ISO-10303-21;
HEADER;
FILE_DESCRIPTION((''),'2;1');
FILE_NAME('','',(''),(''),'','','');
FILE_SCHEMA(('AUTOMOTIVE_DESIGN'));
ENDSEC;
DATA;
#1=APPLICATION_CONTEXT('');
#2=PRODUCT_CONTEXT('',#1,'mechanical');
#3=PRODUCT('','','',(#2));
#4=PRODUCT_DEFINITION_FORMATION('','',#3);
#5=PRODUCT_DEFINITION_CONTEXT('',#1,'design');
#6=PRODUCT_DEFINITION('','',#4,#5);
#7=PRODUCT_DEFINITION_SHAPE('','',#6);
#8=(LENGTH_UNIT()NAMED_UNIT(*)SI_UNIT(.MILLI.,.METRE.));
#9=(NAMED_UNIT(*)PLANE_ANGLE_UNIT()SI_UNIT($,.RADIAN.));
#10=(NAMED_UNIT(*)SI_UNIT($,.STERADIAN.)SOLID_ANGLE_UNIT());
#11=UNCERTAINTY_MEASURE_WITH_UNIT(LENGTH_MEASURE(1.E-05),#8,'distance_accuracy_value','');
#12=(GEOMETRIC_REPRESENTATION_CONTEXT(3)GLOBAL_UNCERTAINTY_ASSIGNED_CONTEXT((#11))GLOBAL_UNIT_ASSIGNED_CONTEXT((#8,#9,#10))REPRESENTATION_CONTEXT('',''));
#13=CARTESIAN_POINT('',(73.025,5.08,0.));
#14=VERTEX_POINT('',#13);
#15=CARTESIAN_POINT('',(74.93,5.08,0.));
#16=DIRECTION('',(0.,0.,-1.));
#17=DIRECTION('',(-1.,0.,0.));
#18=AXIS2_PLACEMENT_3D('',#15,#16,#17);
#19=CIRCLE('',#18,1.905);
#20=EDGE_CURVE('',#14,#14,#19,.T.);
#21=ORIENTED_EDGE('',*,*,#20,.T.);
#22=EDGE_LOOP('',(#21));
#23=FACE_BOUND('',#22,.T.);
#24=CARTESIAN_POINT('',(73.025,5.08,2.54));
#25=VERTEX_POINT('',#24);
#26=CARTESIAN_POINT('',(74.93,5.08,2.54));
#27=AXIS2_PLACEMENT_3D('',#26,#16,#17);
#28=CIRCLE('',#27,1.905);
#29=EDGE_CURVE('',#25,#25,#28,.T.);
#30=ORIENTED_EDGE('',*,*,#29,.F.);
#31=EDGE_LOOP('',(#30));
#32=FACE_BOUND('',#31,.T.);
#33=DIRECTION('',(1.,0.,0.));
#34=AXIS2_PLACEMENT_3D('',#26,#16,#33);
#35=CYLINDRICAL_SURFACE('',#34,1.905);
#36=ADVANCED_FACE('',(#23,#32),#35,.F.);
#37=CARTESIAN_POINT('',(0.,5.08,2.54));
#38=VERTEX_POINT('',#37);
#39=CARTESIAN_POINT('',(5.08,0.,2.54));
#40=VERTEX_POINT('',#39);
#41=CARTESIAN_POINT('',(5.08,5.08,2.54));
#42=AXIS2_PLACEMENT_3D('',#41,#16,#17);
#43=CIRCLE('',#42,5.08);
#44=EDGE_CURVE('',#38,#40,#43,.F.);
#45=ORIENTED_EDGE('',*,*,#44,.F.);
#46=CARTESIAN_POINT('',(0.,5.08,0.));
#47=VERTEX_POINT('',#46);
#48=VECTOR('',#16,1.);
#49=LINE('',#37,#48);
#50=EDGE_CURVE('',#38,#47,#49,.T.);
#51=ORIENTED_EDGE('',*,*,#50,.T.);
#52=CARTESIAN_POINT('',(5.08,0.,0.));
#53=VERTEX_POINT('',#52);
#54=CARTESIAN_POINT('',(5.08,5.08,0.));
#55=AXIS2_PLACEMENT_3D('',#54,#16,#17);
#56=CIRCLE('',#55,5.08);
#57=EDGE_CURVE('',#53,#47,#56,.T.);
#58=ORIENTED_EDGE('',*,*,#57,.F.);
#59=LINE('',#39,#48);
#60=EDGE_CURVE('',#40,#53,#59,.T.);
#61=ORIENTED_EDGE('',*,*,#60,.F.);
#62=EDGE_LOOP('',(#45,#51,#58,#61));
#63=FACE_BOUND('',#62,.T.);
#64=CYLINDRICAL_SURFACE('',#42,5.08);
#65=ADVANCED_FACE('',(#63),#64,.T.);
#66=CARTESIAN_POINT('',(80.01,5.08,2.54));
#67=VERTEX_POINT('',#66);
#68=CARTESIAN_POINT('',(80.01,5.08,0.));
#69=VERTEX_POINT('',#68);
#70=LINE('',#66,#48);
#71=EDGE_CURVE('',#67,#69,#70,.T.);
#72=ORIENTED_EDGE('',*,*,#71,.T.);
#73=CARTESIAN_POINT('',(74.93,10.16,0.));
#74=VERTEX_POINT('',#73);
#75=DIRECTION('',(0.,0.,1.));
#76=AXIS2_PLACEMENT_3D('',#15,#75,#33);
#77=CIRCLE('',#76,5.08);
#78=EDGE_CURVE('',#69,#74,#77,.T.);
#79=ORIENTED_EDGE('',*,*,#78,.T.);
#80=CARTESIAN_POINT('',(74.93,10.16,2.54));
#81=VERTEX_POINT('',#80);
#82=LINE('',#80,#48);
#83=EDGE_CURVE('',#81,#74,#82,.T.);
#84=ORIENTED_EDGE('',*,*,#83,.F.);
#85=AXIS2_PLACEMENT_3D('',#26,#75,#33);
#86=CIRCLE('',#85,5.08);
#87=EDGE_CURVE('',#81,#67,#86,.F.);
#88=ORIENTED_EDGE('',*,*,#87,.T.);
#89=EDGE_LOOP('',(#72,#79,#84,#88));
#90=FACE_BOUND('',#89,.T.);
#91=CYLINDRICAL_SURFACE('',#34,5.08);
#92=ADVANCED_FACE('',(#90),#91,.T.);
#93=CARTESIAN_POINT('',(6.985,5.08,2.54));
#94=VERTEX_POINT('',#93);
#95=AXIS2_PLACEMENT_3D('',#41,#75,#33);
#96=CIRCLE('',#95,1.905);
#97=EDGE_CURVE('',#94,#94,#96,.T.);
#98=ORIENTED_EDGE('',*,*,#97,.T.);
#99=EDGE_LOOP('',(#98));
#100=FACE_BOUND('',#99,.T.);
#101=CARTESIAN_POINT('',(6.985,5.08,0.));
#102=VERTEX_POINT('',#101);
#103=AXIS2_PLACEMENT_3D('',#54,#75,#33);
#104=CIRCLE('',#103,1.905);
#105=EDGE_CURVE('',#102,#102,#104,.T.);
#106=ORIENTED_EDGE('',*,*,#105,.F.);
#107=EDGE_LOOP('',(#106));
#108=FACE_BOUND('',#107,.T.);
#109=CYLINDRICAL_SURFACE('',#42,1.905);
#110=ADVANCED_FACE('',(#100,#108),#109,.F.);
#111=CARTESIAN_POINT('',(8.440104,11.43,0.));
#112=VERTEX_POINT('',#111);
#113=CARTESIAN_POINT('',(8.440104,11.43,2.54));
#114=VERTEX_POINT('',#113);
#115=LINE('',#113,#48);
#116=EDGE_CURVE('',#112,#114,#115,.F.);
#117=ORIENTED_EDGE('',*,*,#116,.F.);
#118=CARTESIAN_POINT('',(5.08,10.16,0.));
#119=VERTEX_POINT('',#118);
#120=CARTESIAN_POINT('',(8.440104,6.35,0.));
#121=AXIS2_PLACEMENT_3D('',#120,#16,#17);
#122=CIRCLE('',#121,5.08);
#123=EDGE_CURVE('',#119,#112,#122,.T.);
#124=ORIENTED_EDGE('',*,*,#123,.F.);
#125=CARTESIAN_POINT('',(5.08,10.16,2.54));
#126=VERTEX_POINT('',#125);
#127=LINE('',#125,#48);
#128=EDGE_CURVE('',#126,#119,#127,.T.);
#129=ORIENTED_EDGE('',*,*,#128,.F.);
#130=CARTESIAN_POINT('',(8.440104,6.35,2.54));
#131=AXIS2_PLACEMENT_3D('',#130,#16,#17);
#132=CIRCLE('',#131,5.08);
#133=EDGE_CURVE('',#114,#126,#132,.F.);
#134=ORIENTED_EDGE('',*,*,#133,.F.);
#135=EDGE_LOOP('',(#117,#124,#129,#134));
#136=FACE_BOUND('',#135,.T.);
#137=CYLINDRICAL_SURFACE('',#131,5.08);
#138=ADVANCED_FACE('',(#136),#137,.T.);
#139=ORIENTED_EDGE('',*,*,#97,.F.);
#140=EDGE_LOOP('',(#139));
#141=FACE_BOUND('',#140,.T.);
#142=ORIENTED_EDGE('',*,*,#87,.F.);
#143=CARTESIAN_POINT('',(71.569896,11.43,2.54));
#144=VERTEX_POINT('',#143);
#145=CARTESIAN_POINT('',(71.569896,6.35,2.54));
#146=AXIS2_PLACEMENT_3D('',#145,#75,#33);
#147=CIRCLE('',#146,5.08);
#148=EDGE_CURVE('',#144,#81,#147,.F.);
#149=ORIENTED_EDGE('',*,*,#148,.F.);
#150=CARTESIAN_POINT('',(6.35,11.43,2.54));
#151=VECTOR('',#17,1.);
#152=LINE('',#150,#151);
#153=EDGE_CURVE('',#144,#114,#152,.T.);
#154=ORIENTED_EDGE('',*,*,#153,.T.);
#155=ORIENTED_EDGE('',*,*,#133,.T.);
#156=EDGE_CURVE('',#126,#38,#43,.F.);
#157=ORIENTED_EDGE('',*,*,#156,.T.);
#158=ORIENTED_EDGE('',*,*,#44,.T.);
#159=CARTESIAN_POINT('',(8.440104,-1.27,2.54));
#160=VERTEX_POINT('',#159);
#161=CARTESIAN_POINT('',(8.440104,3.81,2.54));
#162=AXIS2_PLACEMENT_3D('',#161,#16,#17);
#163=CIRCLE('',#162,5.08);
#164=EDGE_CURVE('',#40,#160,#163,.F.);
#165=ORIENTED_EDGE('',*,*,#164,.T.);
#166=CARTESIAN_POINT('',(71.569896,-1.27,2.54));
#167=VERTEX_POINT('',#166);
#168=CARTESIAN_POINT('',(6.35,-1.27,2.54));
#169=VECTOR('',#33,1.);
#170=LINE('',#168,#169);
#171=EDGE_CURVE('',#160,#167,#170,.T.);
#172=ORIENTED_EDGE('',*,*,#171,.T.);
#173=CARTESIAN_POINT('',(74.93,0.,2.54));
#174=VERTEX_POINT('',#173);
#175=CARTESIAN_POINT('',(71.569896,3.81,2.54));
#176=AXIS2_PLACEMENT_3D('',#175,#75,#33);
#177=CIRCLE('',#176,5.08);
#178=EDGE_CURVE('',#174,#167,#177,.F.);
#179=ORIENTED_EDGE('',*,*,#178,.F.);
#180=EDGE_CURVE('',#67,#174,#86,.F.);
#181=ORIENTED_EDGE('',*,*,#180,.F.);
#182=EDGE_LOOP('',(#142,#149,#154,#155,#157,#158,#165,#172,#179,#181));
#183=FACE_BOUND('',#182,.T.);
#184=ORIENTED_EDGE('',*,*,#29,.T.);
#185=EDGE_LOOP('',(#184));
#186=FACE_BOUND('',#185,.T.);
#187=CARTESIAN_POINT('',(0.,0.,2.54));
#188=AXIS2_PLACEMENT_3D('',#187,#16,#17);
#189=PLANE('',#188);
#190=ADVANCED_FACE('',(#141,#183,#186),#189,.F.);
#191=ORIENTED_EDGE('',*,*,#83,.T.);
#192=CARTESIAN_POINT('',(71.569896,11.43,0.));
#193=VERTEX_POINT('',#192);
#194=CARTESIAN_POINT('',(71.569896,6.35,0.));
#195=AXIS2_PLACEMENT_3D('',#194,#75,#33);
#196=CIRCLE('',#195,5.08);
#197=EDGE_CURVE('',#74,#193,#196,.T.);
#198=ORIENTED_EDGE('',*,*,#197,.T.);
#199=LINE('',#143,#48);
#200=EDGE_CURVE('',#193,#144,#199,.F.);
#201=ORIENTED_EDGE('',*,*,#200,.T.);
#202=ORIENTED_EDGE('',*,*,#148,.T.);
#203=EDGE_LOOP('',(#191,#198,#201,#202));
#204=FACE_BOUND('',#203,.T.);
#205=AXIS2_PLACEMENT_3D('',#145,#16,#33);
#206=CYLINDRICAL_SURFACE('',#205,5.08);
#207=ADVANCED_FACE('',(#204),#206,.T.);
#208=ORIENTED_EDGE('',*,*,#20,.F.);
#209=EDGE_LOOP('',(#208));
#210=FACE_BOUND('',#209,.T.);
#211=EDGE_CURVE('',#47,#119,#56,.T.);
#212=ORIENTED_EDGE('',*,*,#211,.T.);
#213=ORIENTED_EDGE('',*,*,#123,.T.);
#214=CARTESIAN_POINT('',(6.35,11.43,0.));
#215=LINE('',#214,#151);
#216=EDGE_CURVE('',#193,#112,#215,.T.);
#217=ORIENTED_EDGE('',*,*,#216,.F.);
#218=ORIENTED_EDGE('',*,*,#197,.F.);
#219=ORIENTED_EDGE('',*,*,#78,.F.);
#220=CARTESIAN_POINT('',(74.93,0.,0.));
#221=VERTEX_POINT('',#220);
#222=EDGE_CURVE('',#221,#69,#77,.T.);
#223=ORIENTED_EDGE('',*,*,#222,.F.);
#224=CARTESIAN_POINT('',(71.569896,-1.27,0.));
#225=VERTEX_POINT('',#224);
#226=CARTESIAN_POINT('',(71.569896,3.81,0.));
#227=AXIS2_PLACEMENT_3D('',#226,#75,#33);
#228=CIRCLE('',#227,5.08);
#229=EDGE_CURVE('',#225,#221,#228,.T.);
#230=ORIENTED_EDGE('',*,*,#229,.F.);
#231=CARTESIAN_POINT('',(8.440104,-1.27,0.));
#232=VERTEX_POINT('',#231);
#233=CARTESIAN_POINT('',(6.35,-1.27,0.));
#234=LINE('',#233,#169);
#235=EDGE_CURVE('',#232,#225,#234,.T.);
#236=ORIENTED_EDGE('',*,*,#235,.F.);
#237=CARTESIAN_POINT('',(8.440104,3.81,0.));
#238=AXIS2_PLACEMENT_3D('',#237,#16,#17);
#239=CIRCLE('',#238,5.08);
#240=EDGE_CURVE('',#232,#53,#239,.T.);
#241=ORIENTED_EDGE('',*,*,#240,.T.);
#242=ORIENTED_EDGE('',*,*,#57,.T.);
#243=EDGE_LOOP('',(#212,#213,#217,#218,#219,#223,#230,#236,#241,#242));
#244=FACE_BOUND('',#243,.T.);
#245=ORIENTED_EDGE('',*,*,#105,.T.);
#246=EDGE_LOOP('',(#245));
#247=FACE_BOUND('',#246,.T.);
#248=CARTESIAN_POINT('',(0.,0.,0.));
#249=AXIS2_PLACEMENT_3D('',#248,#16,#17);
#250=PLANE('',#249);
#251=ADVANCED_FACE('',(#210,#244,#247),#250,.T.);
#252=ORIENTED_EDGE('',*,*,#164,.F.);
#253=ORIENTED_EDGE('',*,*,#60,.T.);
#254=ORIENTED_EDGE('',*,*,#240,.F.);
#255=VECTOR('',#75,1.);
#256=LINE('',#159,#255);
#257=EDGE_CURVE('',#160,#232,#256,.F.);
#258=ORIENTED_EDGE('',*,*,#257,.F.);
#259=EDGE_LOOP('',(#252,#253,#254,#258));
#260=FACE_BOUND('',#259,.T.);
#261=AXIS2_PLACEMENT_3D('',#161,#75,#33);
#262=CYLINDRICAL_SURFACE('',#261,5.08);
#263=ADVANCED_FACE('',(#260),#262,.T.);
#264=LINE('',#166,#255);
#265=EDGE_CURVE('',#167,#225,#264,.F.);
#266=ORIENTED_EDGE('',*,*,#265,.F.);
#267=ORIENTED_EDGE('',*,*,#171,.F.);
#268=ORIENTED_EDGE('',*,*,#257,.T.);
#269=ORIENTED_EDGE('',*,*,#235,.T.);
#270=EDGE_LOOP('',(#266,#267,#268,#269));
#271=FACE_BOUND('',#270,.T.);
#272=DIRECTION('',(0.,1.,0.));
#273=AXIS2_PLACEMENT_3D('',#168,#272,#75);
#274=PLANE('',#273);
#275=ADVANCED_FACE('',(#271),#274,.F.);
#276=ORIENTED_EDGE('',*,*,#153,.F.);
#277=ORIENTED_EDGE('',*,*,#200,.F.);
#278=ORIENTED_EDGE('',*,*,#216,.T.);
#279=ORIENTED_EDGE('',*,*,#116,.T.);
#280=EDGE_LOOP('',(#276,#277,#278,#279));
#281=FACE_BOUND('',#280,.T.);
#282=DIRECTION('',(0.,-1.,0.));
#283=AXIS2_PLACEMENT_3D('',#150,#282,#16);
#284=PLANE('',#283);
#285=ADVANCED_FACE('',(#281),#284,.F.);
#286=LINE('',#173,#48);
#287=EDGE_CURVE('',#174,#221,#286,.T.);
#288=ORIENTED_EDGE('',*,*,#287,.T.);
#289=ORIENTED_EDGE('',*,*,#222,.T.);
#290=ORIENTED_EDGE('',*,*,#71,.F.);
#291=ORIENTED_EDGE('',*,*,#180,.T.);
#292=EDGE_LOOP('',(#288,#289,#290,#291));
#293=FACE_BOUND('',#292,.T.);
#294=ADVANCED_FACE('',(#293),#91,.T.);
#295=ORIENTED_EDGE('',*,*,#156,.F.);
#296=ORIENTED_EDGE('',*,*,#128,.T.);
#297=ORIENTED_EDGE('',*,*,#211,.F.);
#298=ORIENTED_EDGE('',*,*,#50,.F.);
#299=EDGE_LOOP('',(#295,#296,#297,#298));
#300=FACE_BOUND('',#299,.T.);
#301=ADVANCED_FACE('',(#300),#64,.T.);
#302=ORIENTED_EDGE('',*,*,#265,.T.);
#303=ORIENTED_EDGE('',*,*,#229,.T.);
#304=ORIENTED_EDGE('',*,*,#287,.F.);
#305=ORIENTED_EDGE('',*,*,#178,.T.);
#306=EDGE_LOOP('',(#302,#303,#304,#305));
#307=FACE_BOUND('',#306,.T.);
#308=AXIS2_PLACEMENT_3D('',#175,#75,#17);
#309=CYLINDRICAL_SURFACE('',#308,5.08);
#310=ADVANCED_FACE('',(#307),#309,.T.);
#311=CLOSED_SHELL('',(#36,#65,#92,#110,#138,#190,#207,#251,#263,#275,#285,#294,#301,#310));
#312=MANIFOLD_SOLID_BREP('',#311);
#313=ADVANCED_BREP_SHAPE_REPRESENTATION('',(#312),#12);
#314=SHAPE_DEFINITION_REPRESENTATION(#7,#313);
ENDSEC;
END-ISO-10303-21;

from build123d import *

# Parameters (mm, degrees)
SKETCH1_R           = 1.905
BOSS_EXTRUDE1_DEPTH = 2.54
FILLET7_R           = 5.08


with BuildPart() as part:
    # Sketch1 → Boss-Extrude1 (new body)
    with BuildSketch(Plane.XY):
        Polygon((5.08, 10.16), (6.35, 11.43), (40.005, 11.43), (40.005, -1.27), (6.35, -1.27), (5.08, 0), (0, 0), (0, 10.16), align=None)
        with Locations((5.08, 5.08)):
            Circle(SKETCH1_R, mode=Mode.SUBTRACT)
    extrude(amount=BOSS_EXTRUDE1_DEPTH)

    # Fillet7
    # the kernel refuses this fillet: 5.08 mm, written as the material it takes off along each edge
    with BuildSketch(Plane(origin=(6.35, -1.27, -5.225260413), x_dir=(1, 0, 0), z_dir=(0, 0, 1))) as fillet7_piece_1:
        with BuildLine():
            CenterArc((2.090104165, 5.08), FILLET7_R, 228.590377891, 41.409622109)
            Line((-1.27, 1.27), (-1.337202083, 1.1938))
            ThreePointArc((-1.337202083, 1.1938), (-0.706842049, 0.563157951), (-0.071842049, -0.071842049))
            Line((-0.071842049, -0.071842049), (0, -0.1016))
            Line((0, -0.1016), (2.090104165, -0.1016))
            Line((2.090104165, -0.1016), (2.090104165, 0))
        make_face()
    extrude(amount=12.990520825, mode=Mode.SUBTRACT)
    with BuildSketch(Plane(origin=(6.35, 11.43, -5.225260413), x_dir=(-0.7071067811865464, -0.7071067811865488, 0), z_dir=(0, 0, 1))) as fillet7_piece_2:
        with BuildLine():
            CenterArc((2.11417562, 5.070029277), FILLET7_R, 225, 41.409622109)
            Line((-1.477926828, 1.477926828), (-1.549768877, 1.40608478))
            Line((-1.549768877, 1.40608478), (-0.071842049, -0.071842049))
            Line((-0.071842049, -0.071842049), (0, -0.1016))
            ThreePointArc((0, -0.1016), (0.898025612, -0.1016), (1.789688736, -0.101400586))
            Line((1.789688736, -0.101400586), (1.796051224, 0))
        make_face()
    extrude(amount=12.990520825, mode=Mode.SUBTRACT)
    with BuildSketch(Plane(origin=(0, 0, -12.7), x_dir=(1, 0, 0), z_dir=(0, 0, 1)), Plane(origin=(0, 10.16, -12.7), x_dir=(0, -1, 0), z_dir=(0, 0, 1))) as fillet7_piece_3:
        with BuildLine():
            CenterArc((FILLET7_R, FILLET7_R), FILLET7_R, 180, 90)
            Line((0, FILLET7_R), (-FILLET7_R * 0.02, FILLET7_R))
            Line((-FILLET7_R * 0.02, FILLET7_R), (-FILLET7_R * 0.02, -FILLET7_R * 0.02))
            Line((-FILLET7_R * 0.02, -FILLET7_R * 0.02), (FILLET7_R, -FILLET7_R * 0.02))
            Line((FILLET7_R, -FILLET7_R * 0.02), (FILLET7_R, 0))
        make_face()
    extrude(amount=27.94, mode=Mode.SUBTRACT)

    # Mirror7: part across plane


with BuildPart() as part_1:
    add(part.part)
    add(part.part.mirror(Plane(origin=(40.005, -1.27, 2.54), x_dir=(0, 0, 1), z_dir=(-1, 0, 0))))


solid = part_1.part
